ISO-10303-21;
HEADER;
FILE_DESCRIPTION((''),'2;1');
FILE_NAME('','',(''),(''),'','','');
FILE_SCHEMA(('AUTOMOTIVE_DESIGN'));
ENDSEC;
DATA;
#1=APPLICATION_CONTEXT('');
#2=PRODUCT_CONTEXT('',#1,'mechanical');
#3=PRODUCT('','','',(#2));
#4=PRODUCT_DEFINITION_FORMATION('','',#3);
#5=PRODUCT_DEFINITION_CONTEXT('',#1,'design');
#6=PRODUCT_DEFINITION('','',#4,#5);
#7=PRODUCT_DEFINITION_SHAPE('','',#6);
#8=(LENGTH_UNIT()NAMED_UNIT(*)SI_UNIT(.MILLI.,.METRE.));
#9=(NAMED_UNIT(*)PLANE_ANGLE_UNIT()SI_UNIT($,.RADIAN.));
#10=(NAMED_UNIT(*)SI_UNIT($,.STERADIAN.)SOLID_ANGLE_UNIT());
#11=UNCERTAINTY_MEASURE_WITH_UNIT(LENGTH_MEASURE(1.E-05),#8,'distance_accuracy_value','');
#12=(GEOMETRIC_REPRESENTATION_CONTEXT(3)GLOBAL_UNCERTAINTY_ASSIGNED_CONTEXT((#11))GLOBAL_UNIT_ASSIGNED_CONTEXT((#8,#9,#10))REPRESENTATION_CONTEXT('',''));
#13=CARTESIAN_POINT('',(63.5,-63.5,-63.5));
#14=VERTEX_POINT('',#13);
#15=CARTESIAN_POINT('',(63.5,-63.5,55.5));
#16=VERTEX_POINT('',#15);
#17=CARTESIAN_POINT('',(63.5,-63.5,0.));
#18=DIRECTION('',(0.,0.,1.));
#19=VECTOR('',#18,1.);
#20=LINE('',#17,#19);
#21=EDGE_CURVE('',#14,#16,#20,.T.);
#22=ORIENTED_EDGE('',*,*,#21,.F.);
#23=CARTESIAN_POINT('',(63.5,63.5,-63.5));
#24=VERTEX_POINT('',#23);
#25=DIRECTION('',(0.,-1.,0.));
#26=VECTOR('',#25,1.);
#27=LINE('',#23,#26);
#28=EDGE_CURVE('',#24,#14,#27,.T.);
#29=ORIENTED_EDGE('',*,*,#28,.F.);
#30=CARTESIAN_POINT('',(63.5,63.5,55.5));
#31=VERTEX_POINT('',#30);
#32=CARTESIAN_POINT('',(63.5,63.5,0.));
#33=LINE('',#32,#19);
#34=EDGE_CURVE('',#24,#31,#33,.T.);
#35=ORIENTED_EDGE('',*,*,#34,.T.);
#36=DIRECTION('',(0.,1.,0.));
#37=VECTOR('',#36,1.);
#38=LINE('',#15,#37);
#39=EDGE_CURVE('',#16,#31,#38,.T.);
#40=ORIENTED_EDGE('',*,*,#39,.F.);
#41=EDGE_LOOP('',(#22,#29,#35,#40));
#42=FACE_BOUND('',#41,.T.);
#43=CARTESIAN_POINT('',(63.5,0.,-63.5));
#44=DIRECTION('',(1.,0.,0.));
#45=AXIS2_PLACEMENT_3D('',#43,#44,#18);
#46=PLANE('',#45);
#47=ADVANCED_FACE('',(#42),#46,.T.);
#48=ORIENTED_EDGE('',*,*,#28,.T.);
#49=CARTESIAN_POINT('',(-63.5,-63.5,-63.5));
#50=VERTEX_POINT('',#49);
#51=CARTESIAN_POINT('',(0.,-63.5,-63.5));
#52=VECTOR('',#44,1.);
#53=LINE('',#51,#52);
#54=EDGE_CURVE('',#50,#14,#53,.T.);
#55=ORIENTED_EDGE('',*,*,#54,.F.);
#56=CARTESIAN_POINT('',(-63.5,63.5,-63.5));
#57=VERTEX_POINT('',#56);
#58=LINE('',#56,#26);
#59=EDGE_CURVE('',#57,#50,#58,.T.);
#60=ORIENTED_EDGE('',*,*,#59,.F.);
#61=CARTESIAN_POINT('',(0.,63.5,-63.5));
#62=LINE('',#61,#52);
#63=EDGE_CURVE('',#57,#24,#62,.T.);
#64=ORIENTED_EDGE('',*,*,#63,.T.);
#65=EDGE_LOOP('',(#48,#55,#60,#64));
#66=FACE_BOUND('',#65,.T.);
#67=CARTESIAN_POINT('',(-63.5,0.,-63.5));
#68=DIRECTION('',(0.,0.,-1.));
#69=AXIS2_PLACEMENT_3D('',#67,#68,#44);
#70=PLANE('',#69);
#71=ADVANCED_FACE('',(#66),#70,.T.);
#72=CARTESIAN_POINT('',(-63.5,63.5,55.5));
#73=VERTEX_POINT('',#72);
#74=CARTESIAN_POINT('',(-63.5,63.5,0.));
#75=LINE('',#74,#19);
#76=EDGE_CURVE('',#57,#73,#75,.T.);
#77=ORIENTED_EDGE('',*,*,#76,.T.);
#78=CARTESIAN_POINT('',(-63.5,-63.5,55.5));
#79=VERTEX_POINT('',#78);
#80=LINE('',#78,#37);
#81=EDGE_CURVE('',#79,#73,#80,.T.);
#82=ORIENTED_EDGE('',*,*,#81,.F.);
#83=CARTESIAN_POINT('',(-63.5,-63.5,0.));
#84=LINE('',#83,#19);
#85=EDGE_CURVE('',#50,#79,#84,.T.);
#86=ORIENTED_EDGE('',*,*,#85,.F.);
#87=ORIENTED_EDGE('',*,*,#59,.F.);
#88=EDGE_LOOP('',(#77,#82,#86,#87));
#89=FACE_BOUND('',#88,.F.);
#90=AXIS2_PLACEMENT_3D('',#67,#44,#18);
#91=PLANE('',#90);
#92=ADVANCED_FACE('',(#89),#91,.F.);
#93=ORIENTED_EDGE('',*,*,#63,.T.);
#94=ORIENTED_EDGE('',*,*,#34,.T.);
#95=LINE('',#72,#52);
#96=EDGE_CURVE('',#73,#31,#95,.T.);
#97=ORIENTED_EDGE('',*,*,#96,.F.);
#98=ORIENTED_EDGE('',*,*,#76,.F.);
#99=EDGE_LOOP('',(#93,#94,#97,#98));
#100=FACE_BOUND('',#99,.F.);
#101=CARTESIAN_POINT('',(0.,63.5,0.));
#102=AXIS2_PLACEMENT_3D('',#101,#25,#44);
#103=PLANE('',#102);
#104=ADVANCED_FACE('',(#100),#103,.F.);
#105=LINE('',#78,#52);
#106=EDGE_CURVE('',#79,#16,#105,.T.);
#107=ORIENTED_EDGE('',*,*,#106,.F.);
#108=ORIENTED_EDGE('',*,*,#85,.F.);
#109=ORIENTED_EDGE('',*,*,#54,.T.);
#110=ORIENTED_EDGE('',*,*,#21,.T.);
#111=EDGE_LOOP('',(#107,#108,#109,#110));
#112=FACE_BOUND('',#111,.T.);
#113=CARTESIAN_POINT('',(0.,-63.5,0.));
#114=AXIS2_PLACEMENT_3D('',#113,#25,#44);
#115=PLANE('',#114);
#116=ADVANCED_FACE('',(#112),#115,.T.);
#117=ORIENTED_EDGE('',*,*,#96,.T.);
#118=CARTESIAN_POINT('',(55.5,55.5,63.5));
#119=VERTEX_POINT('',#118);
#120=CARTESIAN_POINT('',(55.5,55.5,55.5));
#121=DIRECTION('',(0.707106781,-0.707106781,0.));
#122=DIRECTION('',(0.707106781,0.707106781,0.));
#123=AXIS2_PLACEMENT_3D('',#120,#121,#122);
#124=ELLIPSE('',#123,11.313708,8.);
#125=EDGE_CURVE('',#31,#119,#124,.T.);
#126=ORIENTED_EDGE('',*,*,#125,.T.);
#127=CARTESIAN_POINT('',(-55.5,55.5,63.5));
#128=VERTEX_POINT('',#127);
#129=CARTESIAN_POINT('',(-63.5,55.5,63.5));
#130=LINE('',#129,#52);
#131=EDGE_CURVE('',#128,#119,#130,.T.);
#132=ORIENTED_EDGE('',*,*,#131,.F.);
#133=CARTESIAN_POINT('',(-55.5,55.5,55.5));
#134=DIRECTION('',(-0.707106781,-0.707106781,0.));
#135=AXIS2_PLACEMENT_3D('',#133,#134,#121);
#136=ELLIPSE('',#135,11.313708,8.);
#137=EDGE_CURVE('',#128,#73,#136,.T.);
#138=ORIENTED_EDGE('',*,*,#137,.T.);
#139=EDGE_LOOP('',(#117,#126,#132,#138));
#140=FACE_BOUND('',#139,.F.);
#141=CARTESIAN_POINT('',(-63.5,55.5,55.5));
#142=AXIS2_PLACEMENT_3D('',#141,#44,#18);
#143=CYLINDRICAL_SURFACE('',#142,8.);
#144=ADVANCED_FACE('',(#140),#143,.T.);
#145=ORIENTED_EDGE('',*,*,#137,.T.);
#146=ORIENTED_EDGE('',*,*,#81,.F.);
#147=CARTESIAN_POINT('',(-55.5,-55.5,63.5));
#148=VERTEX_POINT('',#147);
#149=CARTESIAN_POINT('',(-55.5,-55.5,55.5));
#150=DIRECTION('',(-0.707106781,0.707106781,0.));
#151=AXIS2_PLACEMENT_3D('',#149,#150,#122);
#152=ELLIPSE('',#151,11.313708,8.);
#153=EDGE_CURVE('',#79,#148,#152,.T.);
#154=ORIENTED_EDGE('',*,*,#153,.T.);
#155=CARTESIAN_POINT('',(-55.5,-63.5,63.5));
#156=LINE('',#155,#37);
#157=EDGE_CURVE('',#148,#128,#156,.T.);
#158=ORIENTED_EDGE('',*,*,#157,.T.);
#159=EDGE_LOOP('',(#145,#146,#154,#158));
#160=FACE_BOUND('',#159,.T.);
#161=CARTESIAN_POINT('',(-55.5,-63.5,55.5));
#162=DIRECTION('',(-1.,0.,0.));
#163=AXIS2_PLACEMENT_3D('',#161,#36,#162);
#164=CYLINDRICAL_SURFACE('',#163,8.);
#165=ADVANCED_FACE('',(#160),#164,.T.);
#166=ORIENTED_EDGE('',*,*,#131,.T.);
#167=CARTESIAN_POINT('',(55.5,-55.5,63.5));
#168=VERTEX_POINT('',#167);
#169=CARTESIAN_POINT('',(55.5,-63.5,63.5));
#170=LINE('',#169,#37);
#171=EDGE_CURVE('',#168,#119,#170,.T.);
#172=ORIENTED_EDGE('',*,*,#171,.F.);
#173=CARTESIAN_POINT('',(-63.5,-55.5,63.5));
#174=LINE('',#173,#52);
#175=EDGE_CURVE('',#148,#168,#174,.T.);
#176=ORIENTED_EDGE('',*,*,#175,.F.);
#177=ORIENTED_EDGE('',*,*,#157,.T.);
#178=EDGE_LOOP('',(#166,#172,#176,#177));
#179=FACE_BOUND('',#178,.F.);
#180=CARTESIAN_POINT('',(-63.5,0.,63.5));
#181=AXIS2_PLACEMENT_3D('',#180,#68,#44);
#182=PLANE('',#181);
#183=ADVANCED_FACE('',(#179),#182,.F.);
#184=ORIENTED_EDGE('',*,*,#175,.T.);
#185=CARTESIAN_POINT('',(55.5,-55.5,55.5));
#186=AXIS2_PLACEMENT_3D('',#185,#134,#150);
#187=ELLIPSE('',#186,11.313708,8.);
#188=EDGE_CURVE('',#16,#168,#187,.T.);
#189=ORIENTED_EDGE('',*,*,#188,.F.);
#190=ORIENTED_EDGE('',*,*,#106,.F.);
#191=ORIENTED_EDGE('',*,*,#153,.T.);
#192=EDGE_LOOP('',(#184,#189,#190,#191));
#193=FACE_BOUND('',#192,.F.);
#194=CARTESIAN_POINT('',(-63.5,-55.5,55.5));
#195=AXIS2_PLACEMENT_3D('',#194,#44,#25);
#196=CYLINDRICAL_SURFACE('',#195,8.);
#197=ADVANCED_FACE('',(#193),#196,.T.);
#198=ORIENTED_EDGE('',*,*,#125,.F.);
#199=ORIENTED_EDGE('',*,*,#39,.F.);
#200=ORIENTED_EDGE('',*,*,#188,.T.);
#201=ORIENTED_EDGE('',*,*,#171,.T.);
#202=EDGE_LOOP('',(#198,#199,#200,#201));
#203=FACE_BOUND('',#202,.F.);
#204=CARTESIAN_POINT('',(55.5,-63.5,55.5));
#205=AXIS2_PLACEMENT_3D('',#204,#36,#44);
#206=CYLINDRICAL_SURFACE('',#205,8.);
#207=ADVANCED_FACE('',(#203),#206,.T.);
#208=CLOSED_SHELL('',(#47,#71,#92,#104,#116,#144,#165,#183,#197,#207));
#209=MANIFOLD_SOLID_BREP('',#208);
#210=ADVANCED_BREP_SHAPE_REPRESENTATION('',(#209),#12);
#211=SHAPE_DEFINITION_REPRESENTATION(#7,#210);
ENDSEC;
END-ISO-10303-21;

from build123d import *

# Parameters (mm, degrees)
F0_W     = 127
F0_H     = 127
F1_DEPTH = 63.5
F2_R     = 8


# Not quite as in the source:
# - the program builds the solid bodies; features that only make, move or delete a surface that nothing else refers to are left out


with BuildPart() as f1:
    # F0 (on Front) → F1 (new body, symmetric)
    with BuildSketch(Plane.XZ):
        Rectangle(F0_W, F0_H)
    extrude(amount=F1_DEPTH, both=True)

    # F2
    f2_edges = [f1.edges().sort_by_distance(p)[0] for p in [
        (63.5, 0, 63.5),
        (0, 63.5, 63.5),
        (-63.5, 0, 63.5),
        (0, -63.5, 63.5),
    ]]
    fillet(f2_edges, radius=F2_R)


solid = f1.part
